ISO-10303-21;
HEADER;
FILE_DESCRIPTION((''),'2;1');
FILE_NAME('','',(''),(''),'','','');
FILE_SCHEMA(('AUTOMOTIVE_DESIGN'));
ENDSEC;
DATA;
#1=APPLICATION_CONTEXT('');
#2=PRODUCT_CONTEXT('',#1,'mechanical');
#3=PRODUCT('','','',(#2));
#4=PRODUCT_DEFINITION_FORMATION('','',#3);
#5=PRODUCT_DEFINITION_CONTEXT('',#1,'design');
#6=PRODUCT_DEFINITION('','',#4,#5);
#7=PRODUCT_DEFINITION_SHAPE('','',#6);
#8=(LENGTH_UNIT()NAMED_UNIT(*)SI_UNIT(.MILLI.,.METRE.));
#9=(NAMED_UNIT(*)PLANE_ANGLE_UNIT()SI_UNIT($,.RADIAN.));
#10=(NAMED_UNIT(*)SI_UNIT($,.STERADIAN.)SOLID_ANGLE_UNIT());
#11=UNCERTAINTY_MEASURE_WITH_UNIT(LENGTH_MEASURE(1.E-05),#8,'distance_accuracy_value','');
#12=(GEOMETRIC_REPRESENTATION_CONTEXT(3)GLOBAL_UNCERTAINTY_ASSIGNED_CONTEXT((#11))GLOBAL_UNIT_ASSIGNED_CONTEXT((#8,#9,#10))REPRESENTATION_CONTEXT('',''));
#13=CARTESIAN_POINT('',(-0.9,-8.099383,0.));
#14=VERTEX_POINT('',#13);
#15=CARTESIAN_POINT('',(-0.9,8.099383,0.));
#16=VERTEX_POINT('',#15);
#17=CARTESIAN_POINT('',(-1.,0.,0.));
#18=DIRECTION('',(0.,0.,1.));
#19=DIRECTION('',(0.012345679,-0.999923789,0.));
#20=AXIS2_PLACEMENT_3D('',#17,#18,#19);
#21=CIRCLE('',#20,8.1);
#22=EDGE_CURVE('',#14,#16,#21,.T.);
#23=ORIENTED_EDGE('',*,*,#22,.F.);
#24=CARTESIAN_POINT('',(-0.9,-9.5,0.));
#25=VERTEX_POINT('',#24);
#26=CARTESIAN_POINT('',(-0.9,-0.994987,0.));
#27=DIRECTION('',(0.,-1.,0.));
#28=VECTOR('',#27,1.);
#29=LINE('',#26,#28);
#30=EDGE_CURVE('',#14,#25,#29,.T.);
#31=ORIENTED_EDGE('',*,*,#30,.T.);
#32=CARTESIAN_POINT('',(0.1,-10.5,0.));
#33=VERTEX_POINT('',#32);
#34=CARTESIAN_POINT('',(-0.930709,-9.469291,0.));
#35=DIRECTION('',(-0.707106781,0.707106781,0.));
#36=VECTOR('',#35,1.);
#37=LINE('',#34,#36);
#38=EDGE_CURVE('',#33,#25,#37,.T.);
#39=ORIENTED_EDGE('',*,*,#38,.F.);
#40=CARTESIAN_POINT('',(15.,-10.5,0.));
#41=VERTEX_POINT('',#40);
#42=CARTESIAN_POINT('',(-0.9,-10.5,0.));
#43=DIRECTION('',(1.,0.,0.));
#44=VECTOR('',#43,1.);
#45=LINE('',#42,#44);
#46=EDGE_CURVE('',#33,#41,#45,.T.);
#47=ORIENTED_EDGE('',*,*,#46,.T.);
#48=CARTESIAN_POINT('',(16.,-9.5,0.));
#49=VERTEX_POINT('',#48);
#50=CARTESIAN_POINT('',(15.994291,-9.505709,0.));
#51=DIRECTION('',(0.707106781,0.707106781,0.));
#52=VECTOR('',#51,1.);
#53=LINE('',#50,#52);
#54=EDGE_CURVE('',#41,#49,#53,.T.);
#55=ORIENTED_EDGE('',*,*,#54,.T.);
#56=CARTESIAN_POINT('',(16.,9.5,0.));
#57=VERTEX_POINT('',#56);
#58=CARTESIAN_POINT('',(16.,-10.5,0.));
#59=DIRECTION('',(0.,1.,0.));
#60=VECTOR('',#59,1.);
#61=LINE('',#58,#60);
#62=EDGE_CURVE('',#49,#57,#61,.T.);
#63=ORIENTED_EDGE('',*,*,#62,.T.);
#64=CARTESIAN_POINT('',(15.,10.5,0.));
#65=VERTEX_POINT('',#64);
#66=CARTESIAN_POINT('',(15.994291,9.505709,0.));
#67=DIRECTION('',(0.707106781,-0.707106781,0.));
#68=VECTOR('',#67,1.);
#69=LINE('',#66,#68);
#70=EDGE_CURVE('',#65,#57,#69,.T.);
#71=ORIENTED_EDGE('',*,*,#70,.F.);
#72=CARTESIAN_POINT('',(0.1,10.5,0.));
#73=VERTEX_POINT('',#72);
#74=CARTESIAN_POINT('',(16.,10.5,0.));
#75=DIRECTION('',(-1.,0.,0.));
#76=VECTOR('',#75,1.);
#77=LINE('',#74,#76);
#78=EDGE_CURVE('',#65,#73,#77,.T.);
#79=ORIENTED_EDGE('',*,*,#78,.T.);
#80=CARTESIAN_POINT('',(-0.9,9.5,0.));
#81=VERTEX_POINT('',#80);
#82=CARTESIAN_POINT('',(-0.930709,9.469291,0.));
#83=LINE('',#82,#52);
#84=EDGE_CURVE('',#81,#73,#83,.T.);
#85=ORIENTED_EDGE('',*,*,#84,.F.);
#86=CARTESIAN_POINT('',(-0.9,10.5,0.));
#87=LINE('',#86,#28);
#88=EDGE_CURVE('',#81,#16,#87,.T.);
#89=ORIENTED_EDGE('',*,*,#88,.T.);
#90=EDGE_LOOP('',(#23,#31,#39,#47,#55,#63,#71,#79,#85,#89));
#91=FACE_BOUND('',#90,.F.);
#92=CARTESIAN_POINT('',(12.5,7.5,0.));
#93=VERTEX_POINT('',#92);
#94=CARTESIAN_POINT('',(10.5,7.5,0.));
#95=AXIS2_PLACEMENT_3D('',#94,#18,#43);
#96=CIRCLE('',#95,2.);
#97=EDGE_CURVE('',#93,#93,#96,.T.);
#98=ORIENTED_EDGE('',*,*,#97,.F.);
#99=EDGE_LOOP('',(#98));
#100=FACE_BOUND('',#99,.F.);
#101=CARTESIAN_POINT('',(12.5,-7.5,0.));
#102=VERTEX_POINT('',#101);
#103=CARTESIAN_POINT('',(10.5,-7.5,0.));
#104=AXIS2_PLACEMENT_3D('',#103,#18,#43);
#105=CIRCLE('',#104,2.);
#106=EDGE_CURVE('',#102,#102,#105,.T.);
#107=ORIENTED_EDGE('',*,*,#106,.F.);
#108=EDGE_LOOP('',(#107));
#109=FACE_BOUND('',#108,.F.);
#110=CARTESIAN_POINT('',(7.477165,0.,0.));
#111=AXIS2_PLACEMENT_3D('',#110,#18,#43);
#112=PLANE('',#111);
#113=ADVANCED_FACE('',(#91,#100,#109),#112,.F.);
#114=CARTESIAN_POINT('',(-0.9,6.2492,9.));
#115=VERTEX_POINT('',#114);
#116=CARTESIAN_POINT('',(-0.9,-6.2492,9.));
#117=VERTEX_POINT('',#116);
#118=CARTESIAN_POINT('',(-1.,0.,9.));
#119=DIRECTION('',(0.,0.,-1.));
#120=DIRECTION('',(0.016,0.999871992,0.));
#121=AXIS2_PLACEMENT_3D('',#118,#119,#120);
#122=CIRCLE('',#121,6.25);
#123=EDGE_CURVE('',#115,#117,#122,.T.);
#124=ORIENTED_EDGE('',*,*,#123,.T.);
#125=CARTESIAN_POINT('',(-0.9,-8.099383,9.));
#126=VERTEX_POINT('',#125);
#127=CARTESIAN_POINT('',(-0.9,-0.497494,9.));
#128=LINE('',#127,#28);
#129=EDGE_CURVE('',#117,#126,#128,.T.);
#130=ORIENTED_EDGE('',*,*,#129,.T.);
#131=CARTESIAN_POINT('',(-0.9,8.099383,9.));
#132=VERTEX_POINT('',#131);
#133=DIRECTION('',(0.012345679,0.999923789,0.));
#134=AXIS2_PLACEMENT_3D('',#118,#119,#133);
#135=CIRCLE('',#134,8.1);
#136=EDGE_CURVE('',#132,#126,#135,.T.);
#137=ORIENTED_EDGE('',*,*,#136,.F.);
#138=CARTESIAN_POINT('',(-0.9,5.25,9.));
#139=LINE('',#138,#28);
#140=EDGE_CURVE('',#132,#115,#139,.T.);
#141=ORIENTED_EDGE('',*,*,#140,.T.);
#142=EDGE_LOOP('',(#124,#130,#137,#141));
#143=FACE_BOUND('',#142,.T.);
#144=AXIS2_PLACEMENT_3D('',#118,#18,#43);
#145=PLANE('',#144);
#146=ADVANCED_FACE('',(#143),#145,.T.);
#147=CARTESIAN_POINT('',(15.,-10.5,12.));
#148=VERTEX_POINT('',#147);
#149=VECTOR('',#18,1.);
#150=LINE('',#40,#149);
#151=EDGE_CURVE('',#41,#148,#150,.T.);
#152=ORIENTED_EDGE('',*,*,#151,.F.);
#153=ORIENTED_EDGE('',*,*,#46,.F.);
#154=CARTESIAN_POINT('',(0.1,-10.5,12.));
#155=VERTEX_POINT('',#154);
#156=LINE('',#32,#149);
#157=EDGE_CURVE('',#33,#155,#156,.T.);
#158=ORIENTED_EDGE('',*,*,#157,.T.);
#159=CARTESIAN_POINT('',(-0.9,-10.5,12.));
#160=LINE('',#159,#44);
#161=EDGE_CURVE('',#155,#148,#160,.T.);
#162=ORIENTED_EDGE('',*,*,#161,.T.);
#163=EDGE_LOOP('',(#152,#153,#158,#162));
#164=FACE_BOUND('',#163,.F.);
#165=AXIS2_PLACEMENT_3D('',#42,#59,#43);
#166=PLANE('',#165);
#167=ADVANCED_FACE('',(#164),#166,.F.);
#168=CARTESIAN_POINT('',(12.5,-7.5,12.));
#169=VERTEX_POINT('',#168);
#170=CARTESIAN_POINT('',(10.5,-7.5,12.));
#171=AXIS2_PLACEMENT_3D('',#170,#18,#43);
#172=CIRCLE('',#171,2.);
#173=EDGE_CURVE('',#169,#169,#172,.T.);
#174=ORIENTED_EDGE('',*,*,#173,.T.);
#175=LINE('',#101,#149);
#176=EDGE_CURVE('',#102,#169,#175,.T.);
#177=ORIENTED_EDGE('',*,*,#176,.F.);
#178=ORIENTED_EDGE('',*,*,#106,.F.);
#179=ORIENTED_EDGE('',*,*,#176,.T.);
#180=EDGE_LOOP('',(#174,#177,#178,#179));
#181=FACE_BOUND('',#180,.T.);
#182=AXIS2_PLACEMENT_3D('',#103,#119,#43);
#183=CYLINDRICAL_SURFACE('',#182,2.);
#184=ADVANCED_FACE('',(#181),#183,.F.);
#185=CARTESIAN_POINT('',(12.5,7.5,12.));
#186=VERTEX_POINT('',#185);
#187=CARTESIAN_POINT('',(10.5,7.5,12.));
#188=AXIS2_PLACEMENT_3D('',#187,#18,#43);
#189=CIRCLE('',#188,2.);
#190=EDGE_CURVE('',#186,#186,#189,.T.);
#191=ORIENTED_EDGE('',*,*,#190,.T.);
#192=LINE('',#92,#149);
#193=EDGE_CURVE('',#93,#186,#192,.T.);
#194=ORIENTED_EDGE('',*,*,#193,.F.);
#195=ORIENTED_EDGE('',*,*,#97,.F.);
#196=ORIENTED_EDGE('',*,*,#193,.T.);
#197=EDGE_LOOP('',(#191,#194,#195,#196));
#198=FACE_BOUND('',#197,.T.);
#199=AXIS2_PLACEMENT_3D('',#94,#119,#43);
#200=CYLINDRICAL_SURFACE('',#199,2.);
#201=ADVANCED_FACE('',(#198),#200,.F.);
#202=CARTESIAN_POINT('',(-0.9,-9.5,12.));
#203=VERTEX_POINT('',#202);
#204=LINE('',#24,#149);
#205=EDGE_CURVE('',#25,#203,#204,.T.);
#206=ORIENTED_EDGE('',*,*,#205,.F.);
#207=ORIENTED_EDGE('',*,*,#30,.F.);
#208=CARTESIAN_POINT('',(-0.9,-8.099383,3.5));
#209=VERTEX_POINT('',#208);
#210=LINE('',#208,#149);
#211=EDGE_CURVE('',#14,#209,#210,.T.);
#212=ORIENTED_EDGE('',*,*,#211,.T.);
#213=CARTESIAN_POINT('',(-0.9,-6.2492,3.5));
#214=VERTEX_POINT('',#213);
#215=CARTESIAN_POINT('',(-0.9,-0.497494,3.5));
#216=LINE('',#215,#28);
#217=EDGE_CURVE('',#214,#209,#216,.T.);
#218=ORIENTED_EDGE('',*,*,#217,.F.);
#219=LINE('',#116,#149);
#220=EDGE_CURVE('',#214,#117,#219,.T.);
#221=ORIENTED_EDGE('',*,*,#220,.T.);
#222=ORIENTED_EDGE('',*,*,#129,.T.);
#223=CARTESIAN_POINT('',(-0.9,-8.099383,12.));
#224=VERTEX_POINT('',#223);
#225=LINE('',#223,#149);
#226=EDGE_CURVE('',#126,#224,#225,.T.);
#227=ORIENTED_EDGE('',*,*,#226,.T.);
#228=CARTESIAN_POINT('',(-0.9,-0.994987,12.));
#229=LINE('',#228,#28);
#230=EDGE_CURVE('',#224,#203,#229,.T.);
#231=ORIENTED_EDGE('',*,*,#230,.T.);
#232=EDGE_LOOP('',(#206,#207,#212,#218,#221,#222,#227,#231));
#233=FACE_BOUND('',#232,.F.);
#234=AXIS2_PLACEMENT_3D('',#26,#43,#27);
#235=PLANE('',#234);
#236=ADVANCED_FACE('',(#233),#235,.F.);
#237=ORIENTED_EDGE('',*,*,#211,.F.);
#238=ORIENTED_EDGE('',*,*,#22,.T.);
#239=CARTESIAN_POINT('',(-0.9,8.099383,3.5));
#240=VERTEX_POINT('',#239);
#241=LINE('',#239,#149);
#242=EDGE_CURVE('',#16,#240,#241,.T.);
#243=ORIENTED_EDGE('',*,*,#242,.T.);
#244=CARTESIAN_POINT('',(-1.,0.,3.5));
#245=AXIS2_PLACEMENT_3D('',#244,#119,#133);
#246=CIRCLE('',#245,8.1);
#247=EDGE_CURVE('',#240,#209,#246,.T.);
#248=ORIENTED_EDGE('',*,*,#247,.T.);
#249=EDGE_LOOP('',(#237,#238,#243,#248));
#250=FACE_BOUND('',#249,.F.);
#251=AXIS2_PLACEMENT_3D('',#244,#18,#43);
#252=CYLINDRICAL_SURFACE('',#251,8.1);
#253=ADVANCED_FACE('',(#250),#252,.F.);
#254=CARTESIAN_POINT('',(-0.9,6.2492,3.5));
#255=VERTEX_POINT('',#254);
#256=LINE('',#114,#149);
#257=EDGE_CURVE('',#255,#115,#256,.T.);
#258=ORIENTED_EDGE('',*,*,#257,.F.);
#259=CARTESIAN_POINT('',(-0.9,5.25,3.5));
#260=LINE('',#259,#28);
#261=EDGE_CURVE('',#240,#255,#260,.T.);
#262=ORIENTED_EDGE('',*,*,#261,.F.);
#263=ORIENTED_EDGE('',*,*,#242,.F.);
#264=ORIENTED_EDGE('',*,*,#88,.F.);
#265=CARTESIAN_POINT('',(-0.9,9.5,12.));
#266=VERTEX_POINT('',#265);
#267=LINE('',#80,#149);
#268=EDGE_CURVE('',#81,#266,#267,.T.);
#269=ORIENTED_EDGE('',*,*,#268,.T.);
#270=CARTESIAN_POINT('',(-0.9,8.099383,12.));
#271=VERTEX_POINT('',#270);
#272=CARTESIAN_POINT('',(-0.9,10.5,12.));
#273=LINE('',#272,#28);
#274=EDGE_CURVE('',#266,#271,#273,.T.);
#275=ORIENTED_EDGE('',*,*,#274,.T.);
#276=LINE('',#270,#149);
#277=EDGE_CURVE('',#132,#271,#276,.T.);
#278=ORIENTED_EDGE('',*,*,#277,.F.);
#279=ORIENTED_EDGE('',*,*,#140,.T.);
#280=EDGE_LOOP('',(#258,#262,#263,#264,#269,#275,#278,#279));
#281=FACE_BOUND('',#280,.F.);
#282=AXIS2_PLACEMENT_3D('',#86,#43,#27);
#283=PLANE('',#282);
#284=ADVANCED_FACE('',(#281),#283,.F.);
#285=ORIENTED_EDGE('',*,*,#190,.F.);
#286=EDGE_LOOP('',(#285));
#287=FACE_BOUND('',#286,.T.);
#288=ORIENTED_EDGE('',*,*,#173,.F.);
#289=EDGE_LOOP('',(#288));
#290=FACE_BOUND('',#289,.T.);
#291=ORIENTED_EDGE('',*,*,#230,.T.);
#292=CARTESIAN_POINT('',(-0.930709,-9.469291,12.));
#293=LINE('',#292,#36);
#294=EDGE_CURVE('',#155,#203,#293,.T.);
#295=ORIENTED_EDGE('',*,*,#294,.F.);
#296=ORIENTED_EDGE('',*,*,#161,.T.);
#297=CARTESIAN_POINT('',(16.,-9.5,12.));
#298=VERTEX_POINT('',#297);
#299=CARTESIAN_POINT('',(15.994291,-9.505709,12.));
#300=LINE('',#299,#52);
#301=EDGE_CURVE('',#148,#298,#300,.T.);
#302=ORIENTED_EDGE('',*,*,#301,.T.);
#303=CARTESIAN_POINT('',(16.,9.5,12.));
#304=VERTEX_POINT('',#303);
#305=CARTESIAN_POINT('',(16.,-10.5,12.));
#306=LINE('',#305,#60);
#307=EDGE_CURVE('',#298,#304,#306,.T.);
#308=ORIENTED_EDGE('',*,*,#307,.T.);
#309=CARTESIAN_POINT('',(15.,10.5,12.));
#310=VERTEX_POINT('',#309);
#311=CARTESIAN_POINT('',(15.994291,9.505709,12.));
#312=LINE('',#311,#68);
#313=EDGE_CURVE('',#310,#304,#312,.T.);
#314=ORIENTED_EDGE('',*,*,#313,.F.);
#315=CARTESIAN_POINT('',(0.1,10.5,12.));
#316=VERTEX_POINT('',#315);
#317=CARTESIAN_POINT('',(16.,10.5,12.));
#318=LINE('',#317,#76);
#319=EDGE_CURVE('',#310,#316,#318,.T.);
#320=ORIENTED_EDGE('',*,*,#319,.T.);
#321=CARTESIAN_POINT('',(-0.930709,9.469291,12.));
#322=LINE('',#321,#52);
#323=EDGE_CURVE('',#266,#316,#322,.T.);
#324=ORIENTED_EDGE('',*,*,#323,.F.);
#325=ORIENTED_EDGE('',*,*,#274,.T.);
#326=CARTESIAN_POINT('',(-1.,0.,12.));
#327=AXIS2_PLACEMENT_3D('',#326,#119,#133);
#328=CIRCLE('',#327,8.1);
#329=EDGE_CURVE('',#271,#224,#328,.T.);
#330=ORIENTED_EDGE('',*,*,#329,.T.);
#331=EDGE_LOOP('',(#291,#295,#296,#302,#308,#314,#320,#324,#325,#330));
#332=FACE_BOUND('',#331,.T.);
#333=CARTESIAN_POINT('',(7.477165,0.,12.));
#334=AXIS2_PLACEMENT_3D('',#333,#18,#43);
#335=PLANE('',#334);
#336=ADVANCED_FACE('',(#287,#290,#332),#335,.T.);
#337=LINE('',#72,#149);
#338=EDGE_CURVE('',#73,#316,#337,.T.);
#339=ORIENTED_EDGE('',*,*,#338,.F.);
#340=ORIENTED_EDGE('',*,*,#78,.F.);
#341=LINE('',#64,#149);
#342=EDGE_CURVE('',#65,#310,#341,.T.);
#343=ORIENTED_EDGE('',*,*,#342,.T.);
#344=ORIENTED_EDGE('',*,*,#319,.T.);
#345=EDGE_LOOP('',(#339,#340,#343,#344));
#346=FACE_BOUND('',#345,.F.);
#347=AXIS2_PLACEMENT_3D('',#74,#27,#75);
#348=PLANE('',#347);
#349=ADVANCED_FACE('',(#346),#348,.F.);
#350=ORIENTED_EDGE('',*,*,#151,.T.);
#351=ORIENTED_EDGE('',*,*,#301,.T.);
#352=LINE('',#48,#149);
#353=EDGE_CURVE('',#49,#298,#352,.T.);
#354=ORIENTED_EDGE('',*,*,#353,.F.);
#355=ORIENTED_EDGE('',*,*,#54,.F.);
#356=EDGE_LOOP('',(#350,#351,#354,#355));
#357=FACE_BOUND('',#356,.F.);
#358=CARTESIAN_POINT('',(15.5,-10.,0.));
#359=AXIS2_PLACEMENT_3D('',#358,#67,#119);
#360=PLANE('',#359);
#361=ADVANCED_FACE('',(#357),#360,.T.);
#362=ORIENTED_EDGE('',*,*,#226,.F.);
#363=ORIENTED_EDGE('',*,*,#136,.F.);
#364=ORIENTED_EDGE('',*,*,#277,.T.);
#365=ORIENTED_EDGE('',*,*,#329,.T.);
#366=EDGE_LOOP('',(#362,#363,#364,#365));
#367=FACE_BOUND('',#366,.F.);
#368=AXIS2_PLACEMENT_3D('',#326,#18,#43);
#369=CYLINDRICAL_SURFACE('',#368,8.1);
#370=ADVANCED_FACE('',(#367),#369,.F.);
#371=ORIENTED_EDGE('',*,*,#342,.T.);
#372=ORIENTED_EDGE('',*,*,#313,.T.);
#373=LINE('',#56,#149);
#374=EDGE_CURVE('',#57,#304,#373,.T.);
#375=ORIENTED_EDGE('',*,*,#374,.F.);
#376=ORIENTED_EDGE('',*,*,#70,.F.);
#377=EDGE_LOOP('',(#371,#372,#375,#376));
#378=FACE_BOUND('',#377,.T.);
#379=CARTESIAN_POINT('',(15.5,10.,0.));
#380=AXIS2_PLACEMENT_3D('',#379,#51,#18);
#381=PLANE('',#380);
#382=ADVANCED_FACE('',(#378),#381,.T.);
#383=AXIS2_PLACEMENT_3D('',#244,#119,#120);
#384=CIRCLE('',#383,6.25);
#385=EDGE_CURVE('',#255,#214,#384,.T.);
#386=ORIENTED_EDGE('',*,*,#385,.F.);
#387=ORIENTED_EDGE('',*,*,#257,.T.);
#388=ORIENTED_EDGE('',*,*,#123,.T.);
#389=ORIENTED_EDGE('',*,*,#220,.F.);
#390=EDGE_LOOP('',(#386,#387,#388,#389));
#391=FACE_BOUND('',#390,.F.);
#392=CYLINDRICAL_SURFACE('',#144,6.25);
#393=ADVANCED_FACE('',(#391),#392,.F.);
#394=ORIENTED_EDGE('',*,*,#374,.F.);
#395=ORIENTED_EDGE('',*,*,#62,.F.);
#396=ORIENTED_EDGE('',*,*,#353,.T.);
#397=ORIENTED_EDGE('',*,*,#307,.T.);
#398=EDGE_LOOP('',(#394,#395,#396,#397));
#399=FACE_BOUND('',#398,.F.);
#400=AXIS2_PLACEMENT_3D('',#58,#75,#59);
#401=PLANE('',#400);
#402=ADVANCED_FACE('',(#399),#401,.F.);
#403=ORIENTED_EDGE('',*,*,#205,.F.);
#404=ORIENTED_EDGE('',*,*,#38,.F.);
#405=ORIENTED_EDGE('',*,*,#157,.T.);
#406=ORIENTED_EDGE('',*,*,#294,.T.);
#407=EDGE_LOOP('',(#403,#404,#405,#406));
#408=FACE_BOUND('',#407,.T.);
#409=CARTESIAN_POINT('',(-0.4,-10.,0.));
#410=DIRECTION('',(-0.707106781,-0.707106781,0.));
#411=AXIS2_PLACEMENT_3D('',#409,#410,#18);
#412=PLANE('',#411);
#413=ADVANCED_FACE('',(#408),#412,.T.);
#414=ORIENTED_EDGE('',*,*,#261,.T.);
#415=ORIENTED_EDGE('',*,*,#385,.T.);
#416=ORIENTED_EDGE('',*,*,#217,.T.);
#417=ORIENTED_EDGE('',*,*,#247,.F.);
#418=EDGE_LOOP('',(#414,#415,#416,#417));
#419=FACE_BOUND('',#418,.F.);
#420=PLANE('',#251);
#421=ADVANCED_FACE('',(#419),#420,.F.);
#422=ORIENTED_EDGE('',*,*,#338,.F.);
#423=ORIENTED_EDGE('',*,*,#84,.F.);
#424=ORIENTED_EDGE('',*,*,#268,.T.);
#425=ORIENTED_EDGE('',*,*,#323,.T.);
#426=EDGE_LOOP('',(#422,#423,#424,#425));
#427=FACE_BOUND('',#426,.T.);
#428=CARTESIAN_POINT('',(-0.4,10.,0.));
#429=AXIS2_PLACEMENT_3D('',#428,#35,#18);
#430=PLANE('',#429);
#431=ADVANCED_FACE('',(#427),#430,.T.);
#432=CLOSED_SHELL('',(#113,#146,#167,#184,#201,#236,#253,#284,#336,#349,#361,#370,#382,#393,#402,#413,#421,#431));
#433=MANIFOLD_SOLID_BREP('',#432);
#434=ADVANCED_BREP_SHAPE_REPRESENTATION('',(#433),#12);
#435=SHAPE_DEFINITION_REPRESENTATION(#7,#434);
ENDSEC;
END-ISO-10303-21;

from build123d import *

# Parameters (mm, degrees)
F0_R     = 2
F1_DEPTH = 12
F2_R     = 8.1
F3_DEPTH = 3
F4_R     = 6.25
F5_DEPTH = 5.5
F6_R     = 8.1
F7_DEPTH = 25
F8_SIZE  = 1


with BuildPart() as f1:
    # F0 (on Top) → F1 (new body)
    with BuildSketch(Plane.XY):
        with BuildLine():
            Line((-0.9, -10.5), (16, -10.5))
            Line((16, -10.5), (16, 10.5))
            Line((16, 10.5), (-0.9, 10.5))
            Line((-0.9, 10.5), (-0.9, 0.9949874371))
            ThreePointArc((-0.9, 0.9949874371), (0, 0), (-0.9, -0.9949874371))
            Line((-0.9, -0.9949874371), (-0.9, -10.5))
        make_face()
        with Locations((10.5, -7.5)):
            Circle(F0_R, mode=Mode.SUBTRACT)
        with Locations((10.5, 7.5)):
            Circle(F0_R, mode=Mode.SUBTRACT)
    extrude(amount=F1_DEPTH)

    # F2 (on face) → F3 (cut)
    with BuildSketch(Plane.XY.offset(12)):
        with Locations((-1, 0)):
            Circle(F2_R)
    extrude(amount=-F3_DEPTH, mode=Mode.SUBTRACT)

    # F4 (on face) → F5 (cut)
    with BuildSketch(Plane.XY.offset(9)):
        with Locations((-1, 0)):
            Circle(F4_R)
    extrude(amount=-F5_DEPTH, mode=Mode.SUBTRACT)

    # F6 (on face) → F7 (cut)
    with BuildSketch(Plane.XY.offset(3.5)):
        with Locations((-1, 0)):
            Circle(F6_R)
    extrude(amount=-F7_DEPTH, mode=Mode.SUBTRACT)

    # F8
    f8_edges = [f1.edges().sort_by_distance(p)[0] for p in [
        (16, 10.5, 6),
        (16, -10.5, 6),
        (-0.9, -10.5, 6),
        (-0.9, 10.5, 6),
    ]]
    chamfer(f8_edges, length=F8_SIZE)


solid = f1.part
